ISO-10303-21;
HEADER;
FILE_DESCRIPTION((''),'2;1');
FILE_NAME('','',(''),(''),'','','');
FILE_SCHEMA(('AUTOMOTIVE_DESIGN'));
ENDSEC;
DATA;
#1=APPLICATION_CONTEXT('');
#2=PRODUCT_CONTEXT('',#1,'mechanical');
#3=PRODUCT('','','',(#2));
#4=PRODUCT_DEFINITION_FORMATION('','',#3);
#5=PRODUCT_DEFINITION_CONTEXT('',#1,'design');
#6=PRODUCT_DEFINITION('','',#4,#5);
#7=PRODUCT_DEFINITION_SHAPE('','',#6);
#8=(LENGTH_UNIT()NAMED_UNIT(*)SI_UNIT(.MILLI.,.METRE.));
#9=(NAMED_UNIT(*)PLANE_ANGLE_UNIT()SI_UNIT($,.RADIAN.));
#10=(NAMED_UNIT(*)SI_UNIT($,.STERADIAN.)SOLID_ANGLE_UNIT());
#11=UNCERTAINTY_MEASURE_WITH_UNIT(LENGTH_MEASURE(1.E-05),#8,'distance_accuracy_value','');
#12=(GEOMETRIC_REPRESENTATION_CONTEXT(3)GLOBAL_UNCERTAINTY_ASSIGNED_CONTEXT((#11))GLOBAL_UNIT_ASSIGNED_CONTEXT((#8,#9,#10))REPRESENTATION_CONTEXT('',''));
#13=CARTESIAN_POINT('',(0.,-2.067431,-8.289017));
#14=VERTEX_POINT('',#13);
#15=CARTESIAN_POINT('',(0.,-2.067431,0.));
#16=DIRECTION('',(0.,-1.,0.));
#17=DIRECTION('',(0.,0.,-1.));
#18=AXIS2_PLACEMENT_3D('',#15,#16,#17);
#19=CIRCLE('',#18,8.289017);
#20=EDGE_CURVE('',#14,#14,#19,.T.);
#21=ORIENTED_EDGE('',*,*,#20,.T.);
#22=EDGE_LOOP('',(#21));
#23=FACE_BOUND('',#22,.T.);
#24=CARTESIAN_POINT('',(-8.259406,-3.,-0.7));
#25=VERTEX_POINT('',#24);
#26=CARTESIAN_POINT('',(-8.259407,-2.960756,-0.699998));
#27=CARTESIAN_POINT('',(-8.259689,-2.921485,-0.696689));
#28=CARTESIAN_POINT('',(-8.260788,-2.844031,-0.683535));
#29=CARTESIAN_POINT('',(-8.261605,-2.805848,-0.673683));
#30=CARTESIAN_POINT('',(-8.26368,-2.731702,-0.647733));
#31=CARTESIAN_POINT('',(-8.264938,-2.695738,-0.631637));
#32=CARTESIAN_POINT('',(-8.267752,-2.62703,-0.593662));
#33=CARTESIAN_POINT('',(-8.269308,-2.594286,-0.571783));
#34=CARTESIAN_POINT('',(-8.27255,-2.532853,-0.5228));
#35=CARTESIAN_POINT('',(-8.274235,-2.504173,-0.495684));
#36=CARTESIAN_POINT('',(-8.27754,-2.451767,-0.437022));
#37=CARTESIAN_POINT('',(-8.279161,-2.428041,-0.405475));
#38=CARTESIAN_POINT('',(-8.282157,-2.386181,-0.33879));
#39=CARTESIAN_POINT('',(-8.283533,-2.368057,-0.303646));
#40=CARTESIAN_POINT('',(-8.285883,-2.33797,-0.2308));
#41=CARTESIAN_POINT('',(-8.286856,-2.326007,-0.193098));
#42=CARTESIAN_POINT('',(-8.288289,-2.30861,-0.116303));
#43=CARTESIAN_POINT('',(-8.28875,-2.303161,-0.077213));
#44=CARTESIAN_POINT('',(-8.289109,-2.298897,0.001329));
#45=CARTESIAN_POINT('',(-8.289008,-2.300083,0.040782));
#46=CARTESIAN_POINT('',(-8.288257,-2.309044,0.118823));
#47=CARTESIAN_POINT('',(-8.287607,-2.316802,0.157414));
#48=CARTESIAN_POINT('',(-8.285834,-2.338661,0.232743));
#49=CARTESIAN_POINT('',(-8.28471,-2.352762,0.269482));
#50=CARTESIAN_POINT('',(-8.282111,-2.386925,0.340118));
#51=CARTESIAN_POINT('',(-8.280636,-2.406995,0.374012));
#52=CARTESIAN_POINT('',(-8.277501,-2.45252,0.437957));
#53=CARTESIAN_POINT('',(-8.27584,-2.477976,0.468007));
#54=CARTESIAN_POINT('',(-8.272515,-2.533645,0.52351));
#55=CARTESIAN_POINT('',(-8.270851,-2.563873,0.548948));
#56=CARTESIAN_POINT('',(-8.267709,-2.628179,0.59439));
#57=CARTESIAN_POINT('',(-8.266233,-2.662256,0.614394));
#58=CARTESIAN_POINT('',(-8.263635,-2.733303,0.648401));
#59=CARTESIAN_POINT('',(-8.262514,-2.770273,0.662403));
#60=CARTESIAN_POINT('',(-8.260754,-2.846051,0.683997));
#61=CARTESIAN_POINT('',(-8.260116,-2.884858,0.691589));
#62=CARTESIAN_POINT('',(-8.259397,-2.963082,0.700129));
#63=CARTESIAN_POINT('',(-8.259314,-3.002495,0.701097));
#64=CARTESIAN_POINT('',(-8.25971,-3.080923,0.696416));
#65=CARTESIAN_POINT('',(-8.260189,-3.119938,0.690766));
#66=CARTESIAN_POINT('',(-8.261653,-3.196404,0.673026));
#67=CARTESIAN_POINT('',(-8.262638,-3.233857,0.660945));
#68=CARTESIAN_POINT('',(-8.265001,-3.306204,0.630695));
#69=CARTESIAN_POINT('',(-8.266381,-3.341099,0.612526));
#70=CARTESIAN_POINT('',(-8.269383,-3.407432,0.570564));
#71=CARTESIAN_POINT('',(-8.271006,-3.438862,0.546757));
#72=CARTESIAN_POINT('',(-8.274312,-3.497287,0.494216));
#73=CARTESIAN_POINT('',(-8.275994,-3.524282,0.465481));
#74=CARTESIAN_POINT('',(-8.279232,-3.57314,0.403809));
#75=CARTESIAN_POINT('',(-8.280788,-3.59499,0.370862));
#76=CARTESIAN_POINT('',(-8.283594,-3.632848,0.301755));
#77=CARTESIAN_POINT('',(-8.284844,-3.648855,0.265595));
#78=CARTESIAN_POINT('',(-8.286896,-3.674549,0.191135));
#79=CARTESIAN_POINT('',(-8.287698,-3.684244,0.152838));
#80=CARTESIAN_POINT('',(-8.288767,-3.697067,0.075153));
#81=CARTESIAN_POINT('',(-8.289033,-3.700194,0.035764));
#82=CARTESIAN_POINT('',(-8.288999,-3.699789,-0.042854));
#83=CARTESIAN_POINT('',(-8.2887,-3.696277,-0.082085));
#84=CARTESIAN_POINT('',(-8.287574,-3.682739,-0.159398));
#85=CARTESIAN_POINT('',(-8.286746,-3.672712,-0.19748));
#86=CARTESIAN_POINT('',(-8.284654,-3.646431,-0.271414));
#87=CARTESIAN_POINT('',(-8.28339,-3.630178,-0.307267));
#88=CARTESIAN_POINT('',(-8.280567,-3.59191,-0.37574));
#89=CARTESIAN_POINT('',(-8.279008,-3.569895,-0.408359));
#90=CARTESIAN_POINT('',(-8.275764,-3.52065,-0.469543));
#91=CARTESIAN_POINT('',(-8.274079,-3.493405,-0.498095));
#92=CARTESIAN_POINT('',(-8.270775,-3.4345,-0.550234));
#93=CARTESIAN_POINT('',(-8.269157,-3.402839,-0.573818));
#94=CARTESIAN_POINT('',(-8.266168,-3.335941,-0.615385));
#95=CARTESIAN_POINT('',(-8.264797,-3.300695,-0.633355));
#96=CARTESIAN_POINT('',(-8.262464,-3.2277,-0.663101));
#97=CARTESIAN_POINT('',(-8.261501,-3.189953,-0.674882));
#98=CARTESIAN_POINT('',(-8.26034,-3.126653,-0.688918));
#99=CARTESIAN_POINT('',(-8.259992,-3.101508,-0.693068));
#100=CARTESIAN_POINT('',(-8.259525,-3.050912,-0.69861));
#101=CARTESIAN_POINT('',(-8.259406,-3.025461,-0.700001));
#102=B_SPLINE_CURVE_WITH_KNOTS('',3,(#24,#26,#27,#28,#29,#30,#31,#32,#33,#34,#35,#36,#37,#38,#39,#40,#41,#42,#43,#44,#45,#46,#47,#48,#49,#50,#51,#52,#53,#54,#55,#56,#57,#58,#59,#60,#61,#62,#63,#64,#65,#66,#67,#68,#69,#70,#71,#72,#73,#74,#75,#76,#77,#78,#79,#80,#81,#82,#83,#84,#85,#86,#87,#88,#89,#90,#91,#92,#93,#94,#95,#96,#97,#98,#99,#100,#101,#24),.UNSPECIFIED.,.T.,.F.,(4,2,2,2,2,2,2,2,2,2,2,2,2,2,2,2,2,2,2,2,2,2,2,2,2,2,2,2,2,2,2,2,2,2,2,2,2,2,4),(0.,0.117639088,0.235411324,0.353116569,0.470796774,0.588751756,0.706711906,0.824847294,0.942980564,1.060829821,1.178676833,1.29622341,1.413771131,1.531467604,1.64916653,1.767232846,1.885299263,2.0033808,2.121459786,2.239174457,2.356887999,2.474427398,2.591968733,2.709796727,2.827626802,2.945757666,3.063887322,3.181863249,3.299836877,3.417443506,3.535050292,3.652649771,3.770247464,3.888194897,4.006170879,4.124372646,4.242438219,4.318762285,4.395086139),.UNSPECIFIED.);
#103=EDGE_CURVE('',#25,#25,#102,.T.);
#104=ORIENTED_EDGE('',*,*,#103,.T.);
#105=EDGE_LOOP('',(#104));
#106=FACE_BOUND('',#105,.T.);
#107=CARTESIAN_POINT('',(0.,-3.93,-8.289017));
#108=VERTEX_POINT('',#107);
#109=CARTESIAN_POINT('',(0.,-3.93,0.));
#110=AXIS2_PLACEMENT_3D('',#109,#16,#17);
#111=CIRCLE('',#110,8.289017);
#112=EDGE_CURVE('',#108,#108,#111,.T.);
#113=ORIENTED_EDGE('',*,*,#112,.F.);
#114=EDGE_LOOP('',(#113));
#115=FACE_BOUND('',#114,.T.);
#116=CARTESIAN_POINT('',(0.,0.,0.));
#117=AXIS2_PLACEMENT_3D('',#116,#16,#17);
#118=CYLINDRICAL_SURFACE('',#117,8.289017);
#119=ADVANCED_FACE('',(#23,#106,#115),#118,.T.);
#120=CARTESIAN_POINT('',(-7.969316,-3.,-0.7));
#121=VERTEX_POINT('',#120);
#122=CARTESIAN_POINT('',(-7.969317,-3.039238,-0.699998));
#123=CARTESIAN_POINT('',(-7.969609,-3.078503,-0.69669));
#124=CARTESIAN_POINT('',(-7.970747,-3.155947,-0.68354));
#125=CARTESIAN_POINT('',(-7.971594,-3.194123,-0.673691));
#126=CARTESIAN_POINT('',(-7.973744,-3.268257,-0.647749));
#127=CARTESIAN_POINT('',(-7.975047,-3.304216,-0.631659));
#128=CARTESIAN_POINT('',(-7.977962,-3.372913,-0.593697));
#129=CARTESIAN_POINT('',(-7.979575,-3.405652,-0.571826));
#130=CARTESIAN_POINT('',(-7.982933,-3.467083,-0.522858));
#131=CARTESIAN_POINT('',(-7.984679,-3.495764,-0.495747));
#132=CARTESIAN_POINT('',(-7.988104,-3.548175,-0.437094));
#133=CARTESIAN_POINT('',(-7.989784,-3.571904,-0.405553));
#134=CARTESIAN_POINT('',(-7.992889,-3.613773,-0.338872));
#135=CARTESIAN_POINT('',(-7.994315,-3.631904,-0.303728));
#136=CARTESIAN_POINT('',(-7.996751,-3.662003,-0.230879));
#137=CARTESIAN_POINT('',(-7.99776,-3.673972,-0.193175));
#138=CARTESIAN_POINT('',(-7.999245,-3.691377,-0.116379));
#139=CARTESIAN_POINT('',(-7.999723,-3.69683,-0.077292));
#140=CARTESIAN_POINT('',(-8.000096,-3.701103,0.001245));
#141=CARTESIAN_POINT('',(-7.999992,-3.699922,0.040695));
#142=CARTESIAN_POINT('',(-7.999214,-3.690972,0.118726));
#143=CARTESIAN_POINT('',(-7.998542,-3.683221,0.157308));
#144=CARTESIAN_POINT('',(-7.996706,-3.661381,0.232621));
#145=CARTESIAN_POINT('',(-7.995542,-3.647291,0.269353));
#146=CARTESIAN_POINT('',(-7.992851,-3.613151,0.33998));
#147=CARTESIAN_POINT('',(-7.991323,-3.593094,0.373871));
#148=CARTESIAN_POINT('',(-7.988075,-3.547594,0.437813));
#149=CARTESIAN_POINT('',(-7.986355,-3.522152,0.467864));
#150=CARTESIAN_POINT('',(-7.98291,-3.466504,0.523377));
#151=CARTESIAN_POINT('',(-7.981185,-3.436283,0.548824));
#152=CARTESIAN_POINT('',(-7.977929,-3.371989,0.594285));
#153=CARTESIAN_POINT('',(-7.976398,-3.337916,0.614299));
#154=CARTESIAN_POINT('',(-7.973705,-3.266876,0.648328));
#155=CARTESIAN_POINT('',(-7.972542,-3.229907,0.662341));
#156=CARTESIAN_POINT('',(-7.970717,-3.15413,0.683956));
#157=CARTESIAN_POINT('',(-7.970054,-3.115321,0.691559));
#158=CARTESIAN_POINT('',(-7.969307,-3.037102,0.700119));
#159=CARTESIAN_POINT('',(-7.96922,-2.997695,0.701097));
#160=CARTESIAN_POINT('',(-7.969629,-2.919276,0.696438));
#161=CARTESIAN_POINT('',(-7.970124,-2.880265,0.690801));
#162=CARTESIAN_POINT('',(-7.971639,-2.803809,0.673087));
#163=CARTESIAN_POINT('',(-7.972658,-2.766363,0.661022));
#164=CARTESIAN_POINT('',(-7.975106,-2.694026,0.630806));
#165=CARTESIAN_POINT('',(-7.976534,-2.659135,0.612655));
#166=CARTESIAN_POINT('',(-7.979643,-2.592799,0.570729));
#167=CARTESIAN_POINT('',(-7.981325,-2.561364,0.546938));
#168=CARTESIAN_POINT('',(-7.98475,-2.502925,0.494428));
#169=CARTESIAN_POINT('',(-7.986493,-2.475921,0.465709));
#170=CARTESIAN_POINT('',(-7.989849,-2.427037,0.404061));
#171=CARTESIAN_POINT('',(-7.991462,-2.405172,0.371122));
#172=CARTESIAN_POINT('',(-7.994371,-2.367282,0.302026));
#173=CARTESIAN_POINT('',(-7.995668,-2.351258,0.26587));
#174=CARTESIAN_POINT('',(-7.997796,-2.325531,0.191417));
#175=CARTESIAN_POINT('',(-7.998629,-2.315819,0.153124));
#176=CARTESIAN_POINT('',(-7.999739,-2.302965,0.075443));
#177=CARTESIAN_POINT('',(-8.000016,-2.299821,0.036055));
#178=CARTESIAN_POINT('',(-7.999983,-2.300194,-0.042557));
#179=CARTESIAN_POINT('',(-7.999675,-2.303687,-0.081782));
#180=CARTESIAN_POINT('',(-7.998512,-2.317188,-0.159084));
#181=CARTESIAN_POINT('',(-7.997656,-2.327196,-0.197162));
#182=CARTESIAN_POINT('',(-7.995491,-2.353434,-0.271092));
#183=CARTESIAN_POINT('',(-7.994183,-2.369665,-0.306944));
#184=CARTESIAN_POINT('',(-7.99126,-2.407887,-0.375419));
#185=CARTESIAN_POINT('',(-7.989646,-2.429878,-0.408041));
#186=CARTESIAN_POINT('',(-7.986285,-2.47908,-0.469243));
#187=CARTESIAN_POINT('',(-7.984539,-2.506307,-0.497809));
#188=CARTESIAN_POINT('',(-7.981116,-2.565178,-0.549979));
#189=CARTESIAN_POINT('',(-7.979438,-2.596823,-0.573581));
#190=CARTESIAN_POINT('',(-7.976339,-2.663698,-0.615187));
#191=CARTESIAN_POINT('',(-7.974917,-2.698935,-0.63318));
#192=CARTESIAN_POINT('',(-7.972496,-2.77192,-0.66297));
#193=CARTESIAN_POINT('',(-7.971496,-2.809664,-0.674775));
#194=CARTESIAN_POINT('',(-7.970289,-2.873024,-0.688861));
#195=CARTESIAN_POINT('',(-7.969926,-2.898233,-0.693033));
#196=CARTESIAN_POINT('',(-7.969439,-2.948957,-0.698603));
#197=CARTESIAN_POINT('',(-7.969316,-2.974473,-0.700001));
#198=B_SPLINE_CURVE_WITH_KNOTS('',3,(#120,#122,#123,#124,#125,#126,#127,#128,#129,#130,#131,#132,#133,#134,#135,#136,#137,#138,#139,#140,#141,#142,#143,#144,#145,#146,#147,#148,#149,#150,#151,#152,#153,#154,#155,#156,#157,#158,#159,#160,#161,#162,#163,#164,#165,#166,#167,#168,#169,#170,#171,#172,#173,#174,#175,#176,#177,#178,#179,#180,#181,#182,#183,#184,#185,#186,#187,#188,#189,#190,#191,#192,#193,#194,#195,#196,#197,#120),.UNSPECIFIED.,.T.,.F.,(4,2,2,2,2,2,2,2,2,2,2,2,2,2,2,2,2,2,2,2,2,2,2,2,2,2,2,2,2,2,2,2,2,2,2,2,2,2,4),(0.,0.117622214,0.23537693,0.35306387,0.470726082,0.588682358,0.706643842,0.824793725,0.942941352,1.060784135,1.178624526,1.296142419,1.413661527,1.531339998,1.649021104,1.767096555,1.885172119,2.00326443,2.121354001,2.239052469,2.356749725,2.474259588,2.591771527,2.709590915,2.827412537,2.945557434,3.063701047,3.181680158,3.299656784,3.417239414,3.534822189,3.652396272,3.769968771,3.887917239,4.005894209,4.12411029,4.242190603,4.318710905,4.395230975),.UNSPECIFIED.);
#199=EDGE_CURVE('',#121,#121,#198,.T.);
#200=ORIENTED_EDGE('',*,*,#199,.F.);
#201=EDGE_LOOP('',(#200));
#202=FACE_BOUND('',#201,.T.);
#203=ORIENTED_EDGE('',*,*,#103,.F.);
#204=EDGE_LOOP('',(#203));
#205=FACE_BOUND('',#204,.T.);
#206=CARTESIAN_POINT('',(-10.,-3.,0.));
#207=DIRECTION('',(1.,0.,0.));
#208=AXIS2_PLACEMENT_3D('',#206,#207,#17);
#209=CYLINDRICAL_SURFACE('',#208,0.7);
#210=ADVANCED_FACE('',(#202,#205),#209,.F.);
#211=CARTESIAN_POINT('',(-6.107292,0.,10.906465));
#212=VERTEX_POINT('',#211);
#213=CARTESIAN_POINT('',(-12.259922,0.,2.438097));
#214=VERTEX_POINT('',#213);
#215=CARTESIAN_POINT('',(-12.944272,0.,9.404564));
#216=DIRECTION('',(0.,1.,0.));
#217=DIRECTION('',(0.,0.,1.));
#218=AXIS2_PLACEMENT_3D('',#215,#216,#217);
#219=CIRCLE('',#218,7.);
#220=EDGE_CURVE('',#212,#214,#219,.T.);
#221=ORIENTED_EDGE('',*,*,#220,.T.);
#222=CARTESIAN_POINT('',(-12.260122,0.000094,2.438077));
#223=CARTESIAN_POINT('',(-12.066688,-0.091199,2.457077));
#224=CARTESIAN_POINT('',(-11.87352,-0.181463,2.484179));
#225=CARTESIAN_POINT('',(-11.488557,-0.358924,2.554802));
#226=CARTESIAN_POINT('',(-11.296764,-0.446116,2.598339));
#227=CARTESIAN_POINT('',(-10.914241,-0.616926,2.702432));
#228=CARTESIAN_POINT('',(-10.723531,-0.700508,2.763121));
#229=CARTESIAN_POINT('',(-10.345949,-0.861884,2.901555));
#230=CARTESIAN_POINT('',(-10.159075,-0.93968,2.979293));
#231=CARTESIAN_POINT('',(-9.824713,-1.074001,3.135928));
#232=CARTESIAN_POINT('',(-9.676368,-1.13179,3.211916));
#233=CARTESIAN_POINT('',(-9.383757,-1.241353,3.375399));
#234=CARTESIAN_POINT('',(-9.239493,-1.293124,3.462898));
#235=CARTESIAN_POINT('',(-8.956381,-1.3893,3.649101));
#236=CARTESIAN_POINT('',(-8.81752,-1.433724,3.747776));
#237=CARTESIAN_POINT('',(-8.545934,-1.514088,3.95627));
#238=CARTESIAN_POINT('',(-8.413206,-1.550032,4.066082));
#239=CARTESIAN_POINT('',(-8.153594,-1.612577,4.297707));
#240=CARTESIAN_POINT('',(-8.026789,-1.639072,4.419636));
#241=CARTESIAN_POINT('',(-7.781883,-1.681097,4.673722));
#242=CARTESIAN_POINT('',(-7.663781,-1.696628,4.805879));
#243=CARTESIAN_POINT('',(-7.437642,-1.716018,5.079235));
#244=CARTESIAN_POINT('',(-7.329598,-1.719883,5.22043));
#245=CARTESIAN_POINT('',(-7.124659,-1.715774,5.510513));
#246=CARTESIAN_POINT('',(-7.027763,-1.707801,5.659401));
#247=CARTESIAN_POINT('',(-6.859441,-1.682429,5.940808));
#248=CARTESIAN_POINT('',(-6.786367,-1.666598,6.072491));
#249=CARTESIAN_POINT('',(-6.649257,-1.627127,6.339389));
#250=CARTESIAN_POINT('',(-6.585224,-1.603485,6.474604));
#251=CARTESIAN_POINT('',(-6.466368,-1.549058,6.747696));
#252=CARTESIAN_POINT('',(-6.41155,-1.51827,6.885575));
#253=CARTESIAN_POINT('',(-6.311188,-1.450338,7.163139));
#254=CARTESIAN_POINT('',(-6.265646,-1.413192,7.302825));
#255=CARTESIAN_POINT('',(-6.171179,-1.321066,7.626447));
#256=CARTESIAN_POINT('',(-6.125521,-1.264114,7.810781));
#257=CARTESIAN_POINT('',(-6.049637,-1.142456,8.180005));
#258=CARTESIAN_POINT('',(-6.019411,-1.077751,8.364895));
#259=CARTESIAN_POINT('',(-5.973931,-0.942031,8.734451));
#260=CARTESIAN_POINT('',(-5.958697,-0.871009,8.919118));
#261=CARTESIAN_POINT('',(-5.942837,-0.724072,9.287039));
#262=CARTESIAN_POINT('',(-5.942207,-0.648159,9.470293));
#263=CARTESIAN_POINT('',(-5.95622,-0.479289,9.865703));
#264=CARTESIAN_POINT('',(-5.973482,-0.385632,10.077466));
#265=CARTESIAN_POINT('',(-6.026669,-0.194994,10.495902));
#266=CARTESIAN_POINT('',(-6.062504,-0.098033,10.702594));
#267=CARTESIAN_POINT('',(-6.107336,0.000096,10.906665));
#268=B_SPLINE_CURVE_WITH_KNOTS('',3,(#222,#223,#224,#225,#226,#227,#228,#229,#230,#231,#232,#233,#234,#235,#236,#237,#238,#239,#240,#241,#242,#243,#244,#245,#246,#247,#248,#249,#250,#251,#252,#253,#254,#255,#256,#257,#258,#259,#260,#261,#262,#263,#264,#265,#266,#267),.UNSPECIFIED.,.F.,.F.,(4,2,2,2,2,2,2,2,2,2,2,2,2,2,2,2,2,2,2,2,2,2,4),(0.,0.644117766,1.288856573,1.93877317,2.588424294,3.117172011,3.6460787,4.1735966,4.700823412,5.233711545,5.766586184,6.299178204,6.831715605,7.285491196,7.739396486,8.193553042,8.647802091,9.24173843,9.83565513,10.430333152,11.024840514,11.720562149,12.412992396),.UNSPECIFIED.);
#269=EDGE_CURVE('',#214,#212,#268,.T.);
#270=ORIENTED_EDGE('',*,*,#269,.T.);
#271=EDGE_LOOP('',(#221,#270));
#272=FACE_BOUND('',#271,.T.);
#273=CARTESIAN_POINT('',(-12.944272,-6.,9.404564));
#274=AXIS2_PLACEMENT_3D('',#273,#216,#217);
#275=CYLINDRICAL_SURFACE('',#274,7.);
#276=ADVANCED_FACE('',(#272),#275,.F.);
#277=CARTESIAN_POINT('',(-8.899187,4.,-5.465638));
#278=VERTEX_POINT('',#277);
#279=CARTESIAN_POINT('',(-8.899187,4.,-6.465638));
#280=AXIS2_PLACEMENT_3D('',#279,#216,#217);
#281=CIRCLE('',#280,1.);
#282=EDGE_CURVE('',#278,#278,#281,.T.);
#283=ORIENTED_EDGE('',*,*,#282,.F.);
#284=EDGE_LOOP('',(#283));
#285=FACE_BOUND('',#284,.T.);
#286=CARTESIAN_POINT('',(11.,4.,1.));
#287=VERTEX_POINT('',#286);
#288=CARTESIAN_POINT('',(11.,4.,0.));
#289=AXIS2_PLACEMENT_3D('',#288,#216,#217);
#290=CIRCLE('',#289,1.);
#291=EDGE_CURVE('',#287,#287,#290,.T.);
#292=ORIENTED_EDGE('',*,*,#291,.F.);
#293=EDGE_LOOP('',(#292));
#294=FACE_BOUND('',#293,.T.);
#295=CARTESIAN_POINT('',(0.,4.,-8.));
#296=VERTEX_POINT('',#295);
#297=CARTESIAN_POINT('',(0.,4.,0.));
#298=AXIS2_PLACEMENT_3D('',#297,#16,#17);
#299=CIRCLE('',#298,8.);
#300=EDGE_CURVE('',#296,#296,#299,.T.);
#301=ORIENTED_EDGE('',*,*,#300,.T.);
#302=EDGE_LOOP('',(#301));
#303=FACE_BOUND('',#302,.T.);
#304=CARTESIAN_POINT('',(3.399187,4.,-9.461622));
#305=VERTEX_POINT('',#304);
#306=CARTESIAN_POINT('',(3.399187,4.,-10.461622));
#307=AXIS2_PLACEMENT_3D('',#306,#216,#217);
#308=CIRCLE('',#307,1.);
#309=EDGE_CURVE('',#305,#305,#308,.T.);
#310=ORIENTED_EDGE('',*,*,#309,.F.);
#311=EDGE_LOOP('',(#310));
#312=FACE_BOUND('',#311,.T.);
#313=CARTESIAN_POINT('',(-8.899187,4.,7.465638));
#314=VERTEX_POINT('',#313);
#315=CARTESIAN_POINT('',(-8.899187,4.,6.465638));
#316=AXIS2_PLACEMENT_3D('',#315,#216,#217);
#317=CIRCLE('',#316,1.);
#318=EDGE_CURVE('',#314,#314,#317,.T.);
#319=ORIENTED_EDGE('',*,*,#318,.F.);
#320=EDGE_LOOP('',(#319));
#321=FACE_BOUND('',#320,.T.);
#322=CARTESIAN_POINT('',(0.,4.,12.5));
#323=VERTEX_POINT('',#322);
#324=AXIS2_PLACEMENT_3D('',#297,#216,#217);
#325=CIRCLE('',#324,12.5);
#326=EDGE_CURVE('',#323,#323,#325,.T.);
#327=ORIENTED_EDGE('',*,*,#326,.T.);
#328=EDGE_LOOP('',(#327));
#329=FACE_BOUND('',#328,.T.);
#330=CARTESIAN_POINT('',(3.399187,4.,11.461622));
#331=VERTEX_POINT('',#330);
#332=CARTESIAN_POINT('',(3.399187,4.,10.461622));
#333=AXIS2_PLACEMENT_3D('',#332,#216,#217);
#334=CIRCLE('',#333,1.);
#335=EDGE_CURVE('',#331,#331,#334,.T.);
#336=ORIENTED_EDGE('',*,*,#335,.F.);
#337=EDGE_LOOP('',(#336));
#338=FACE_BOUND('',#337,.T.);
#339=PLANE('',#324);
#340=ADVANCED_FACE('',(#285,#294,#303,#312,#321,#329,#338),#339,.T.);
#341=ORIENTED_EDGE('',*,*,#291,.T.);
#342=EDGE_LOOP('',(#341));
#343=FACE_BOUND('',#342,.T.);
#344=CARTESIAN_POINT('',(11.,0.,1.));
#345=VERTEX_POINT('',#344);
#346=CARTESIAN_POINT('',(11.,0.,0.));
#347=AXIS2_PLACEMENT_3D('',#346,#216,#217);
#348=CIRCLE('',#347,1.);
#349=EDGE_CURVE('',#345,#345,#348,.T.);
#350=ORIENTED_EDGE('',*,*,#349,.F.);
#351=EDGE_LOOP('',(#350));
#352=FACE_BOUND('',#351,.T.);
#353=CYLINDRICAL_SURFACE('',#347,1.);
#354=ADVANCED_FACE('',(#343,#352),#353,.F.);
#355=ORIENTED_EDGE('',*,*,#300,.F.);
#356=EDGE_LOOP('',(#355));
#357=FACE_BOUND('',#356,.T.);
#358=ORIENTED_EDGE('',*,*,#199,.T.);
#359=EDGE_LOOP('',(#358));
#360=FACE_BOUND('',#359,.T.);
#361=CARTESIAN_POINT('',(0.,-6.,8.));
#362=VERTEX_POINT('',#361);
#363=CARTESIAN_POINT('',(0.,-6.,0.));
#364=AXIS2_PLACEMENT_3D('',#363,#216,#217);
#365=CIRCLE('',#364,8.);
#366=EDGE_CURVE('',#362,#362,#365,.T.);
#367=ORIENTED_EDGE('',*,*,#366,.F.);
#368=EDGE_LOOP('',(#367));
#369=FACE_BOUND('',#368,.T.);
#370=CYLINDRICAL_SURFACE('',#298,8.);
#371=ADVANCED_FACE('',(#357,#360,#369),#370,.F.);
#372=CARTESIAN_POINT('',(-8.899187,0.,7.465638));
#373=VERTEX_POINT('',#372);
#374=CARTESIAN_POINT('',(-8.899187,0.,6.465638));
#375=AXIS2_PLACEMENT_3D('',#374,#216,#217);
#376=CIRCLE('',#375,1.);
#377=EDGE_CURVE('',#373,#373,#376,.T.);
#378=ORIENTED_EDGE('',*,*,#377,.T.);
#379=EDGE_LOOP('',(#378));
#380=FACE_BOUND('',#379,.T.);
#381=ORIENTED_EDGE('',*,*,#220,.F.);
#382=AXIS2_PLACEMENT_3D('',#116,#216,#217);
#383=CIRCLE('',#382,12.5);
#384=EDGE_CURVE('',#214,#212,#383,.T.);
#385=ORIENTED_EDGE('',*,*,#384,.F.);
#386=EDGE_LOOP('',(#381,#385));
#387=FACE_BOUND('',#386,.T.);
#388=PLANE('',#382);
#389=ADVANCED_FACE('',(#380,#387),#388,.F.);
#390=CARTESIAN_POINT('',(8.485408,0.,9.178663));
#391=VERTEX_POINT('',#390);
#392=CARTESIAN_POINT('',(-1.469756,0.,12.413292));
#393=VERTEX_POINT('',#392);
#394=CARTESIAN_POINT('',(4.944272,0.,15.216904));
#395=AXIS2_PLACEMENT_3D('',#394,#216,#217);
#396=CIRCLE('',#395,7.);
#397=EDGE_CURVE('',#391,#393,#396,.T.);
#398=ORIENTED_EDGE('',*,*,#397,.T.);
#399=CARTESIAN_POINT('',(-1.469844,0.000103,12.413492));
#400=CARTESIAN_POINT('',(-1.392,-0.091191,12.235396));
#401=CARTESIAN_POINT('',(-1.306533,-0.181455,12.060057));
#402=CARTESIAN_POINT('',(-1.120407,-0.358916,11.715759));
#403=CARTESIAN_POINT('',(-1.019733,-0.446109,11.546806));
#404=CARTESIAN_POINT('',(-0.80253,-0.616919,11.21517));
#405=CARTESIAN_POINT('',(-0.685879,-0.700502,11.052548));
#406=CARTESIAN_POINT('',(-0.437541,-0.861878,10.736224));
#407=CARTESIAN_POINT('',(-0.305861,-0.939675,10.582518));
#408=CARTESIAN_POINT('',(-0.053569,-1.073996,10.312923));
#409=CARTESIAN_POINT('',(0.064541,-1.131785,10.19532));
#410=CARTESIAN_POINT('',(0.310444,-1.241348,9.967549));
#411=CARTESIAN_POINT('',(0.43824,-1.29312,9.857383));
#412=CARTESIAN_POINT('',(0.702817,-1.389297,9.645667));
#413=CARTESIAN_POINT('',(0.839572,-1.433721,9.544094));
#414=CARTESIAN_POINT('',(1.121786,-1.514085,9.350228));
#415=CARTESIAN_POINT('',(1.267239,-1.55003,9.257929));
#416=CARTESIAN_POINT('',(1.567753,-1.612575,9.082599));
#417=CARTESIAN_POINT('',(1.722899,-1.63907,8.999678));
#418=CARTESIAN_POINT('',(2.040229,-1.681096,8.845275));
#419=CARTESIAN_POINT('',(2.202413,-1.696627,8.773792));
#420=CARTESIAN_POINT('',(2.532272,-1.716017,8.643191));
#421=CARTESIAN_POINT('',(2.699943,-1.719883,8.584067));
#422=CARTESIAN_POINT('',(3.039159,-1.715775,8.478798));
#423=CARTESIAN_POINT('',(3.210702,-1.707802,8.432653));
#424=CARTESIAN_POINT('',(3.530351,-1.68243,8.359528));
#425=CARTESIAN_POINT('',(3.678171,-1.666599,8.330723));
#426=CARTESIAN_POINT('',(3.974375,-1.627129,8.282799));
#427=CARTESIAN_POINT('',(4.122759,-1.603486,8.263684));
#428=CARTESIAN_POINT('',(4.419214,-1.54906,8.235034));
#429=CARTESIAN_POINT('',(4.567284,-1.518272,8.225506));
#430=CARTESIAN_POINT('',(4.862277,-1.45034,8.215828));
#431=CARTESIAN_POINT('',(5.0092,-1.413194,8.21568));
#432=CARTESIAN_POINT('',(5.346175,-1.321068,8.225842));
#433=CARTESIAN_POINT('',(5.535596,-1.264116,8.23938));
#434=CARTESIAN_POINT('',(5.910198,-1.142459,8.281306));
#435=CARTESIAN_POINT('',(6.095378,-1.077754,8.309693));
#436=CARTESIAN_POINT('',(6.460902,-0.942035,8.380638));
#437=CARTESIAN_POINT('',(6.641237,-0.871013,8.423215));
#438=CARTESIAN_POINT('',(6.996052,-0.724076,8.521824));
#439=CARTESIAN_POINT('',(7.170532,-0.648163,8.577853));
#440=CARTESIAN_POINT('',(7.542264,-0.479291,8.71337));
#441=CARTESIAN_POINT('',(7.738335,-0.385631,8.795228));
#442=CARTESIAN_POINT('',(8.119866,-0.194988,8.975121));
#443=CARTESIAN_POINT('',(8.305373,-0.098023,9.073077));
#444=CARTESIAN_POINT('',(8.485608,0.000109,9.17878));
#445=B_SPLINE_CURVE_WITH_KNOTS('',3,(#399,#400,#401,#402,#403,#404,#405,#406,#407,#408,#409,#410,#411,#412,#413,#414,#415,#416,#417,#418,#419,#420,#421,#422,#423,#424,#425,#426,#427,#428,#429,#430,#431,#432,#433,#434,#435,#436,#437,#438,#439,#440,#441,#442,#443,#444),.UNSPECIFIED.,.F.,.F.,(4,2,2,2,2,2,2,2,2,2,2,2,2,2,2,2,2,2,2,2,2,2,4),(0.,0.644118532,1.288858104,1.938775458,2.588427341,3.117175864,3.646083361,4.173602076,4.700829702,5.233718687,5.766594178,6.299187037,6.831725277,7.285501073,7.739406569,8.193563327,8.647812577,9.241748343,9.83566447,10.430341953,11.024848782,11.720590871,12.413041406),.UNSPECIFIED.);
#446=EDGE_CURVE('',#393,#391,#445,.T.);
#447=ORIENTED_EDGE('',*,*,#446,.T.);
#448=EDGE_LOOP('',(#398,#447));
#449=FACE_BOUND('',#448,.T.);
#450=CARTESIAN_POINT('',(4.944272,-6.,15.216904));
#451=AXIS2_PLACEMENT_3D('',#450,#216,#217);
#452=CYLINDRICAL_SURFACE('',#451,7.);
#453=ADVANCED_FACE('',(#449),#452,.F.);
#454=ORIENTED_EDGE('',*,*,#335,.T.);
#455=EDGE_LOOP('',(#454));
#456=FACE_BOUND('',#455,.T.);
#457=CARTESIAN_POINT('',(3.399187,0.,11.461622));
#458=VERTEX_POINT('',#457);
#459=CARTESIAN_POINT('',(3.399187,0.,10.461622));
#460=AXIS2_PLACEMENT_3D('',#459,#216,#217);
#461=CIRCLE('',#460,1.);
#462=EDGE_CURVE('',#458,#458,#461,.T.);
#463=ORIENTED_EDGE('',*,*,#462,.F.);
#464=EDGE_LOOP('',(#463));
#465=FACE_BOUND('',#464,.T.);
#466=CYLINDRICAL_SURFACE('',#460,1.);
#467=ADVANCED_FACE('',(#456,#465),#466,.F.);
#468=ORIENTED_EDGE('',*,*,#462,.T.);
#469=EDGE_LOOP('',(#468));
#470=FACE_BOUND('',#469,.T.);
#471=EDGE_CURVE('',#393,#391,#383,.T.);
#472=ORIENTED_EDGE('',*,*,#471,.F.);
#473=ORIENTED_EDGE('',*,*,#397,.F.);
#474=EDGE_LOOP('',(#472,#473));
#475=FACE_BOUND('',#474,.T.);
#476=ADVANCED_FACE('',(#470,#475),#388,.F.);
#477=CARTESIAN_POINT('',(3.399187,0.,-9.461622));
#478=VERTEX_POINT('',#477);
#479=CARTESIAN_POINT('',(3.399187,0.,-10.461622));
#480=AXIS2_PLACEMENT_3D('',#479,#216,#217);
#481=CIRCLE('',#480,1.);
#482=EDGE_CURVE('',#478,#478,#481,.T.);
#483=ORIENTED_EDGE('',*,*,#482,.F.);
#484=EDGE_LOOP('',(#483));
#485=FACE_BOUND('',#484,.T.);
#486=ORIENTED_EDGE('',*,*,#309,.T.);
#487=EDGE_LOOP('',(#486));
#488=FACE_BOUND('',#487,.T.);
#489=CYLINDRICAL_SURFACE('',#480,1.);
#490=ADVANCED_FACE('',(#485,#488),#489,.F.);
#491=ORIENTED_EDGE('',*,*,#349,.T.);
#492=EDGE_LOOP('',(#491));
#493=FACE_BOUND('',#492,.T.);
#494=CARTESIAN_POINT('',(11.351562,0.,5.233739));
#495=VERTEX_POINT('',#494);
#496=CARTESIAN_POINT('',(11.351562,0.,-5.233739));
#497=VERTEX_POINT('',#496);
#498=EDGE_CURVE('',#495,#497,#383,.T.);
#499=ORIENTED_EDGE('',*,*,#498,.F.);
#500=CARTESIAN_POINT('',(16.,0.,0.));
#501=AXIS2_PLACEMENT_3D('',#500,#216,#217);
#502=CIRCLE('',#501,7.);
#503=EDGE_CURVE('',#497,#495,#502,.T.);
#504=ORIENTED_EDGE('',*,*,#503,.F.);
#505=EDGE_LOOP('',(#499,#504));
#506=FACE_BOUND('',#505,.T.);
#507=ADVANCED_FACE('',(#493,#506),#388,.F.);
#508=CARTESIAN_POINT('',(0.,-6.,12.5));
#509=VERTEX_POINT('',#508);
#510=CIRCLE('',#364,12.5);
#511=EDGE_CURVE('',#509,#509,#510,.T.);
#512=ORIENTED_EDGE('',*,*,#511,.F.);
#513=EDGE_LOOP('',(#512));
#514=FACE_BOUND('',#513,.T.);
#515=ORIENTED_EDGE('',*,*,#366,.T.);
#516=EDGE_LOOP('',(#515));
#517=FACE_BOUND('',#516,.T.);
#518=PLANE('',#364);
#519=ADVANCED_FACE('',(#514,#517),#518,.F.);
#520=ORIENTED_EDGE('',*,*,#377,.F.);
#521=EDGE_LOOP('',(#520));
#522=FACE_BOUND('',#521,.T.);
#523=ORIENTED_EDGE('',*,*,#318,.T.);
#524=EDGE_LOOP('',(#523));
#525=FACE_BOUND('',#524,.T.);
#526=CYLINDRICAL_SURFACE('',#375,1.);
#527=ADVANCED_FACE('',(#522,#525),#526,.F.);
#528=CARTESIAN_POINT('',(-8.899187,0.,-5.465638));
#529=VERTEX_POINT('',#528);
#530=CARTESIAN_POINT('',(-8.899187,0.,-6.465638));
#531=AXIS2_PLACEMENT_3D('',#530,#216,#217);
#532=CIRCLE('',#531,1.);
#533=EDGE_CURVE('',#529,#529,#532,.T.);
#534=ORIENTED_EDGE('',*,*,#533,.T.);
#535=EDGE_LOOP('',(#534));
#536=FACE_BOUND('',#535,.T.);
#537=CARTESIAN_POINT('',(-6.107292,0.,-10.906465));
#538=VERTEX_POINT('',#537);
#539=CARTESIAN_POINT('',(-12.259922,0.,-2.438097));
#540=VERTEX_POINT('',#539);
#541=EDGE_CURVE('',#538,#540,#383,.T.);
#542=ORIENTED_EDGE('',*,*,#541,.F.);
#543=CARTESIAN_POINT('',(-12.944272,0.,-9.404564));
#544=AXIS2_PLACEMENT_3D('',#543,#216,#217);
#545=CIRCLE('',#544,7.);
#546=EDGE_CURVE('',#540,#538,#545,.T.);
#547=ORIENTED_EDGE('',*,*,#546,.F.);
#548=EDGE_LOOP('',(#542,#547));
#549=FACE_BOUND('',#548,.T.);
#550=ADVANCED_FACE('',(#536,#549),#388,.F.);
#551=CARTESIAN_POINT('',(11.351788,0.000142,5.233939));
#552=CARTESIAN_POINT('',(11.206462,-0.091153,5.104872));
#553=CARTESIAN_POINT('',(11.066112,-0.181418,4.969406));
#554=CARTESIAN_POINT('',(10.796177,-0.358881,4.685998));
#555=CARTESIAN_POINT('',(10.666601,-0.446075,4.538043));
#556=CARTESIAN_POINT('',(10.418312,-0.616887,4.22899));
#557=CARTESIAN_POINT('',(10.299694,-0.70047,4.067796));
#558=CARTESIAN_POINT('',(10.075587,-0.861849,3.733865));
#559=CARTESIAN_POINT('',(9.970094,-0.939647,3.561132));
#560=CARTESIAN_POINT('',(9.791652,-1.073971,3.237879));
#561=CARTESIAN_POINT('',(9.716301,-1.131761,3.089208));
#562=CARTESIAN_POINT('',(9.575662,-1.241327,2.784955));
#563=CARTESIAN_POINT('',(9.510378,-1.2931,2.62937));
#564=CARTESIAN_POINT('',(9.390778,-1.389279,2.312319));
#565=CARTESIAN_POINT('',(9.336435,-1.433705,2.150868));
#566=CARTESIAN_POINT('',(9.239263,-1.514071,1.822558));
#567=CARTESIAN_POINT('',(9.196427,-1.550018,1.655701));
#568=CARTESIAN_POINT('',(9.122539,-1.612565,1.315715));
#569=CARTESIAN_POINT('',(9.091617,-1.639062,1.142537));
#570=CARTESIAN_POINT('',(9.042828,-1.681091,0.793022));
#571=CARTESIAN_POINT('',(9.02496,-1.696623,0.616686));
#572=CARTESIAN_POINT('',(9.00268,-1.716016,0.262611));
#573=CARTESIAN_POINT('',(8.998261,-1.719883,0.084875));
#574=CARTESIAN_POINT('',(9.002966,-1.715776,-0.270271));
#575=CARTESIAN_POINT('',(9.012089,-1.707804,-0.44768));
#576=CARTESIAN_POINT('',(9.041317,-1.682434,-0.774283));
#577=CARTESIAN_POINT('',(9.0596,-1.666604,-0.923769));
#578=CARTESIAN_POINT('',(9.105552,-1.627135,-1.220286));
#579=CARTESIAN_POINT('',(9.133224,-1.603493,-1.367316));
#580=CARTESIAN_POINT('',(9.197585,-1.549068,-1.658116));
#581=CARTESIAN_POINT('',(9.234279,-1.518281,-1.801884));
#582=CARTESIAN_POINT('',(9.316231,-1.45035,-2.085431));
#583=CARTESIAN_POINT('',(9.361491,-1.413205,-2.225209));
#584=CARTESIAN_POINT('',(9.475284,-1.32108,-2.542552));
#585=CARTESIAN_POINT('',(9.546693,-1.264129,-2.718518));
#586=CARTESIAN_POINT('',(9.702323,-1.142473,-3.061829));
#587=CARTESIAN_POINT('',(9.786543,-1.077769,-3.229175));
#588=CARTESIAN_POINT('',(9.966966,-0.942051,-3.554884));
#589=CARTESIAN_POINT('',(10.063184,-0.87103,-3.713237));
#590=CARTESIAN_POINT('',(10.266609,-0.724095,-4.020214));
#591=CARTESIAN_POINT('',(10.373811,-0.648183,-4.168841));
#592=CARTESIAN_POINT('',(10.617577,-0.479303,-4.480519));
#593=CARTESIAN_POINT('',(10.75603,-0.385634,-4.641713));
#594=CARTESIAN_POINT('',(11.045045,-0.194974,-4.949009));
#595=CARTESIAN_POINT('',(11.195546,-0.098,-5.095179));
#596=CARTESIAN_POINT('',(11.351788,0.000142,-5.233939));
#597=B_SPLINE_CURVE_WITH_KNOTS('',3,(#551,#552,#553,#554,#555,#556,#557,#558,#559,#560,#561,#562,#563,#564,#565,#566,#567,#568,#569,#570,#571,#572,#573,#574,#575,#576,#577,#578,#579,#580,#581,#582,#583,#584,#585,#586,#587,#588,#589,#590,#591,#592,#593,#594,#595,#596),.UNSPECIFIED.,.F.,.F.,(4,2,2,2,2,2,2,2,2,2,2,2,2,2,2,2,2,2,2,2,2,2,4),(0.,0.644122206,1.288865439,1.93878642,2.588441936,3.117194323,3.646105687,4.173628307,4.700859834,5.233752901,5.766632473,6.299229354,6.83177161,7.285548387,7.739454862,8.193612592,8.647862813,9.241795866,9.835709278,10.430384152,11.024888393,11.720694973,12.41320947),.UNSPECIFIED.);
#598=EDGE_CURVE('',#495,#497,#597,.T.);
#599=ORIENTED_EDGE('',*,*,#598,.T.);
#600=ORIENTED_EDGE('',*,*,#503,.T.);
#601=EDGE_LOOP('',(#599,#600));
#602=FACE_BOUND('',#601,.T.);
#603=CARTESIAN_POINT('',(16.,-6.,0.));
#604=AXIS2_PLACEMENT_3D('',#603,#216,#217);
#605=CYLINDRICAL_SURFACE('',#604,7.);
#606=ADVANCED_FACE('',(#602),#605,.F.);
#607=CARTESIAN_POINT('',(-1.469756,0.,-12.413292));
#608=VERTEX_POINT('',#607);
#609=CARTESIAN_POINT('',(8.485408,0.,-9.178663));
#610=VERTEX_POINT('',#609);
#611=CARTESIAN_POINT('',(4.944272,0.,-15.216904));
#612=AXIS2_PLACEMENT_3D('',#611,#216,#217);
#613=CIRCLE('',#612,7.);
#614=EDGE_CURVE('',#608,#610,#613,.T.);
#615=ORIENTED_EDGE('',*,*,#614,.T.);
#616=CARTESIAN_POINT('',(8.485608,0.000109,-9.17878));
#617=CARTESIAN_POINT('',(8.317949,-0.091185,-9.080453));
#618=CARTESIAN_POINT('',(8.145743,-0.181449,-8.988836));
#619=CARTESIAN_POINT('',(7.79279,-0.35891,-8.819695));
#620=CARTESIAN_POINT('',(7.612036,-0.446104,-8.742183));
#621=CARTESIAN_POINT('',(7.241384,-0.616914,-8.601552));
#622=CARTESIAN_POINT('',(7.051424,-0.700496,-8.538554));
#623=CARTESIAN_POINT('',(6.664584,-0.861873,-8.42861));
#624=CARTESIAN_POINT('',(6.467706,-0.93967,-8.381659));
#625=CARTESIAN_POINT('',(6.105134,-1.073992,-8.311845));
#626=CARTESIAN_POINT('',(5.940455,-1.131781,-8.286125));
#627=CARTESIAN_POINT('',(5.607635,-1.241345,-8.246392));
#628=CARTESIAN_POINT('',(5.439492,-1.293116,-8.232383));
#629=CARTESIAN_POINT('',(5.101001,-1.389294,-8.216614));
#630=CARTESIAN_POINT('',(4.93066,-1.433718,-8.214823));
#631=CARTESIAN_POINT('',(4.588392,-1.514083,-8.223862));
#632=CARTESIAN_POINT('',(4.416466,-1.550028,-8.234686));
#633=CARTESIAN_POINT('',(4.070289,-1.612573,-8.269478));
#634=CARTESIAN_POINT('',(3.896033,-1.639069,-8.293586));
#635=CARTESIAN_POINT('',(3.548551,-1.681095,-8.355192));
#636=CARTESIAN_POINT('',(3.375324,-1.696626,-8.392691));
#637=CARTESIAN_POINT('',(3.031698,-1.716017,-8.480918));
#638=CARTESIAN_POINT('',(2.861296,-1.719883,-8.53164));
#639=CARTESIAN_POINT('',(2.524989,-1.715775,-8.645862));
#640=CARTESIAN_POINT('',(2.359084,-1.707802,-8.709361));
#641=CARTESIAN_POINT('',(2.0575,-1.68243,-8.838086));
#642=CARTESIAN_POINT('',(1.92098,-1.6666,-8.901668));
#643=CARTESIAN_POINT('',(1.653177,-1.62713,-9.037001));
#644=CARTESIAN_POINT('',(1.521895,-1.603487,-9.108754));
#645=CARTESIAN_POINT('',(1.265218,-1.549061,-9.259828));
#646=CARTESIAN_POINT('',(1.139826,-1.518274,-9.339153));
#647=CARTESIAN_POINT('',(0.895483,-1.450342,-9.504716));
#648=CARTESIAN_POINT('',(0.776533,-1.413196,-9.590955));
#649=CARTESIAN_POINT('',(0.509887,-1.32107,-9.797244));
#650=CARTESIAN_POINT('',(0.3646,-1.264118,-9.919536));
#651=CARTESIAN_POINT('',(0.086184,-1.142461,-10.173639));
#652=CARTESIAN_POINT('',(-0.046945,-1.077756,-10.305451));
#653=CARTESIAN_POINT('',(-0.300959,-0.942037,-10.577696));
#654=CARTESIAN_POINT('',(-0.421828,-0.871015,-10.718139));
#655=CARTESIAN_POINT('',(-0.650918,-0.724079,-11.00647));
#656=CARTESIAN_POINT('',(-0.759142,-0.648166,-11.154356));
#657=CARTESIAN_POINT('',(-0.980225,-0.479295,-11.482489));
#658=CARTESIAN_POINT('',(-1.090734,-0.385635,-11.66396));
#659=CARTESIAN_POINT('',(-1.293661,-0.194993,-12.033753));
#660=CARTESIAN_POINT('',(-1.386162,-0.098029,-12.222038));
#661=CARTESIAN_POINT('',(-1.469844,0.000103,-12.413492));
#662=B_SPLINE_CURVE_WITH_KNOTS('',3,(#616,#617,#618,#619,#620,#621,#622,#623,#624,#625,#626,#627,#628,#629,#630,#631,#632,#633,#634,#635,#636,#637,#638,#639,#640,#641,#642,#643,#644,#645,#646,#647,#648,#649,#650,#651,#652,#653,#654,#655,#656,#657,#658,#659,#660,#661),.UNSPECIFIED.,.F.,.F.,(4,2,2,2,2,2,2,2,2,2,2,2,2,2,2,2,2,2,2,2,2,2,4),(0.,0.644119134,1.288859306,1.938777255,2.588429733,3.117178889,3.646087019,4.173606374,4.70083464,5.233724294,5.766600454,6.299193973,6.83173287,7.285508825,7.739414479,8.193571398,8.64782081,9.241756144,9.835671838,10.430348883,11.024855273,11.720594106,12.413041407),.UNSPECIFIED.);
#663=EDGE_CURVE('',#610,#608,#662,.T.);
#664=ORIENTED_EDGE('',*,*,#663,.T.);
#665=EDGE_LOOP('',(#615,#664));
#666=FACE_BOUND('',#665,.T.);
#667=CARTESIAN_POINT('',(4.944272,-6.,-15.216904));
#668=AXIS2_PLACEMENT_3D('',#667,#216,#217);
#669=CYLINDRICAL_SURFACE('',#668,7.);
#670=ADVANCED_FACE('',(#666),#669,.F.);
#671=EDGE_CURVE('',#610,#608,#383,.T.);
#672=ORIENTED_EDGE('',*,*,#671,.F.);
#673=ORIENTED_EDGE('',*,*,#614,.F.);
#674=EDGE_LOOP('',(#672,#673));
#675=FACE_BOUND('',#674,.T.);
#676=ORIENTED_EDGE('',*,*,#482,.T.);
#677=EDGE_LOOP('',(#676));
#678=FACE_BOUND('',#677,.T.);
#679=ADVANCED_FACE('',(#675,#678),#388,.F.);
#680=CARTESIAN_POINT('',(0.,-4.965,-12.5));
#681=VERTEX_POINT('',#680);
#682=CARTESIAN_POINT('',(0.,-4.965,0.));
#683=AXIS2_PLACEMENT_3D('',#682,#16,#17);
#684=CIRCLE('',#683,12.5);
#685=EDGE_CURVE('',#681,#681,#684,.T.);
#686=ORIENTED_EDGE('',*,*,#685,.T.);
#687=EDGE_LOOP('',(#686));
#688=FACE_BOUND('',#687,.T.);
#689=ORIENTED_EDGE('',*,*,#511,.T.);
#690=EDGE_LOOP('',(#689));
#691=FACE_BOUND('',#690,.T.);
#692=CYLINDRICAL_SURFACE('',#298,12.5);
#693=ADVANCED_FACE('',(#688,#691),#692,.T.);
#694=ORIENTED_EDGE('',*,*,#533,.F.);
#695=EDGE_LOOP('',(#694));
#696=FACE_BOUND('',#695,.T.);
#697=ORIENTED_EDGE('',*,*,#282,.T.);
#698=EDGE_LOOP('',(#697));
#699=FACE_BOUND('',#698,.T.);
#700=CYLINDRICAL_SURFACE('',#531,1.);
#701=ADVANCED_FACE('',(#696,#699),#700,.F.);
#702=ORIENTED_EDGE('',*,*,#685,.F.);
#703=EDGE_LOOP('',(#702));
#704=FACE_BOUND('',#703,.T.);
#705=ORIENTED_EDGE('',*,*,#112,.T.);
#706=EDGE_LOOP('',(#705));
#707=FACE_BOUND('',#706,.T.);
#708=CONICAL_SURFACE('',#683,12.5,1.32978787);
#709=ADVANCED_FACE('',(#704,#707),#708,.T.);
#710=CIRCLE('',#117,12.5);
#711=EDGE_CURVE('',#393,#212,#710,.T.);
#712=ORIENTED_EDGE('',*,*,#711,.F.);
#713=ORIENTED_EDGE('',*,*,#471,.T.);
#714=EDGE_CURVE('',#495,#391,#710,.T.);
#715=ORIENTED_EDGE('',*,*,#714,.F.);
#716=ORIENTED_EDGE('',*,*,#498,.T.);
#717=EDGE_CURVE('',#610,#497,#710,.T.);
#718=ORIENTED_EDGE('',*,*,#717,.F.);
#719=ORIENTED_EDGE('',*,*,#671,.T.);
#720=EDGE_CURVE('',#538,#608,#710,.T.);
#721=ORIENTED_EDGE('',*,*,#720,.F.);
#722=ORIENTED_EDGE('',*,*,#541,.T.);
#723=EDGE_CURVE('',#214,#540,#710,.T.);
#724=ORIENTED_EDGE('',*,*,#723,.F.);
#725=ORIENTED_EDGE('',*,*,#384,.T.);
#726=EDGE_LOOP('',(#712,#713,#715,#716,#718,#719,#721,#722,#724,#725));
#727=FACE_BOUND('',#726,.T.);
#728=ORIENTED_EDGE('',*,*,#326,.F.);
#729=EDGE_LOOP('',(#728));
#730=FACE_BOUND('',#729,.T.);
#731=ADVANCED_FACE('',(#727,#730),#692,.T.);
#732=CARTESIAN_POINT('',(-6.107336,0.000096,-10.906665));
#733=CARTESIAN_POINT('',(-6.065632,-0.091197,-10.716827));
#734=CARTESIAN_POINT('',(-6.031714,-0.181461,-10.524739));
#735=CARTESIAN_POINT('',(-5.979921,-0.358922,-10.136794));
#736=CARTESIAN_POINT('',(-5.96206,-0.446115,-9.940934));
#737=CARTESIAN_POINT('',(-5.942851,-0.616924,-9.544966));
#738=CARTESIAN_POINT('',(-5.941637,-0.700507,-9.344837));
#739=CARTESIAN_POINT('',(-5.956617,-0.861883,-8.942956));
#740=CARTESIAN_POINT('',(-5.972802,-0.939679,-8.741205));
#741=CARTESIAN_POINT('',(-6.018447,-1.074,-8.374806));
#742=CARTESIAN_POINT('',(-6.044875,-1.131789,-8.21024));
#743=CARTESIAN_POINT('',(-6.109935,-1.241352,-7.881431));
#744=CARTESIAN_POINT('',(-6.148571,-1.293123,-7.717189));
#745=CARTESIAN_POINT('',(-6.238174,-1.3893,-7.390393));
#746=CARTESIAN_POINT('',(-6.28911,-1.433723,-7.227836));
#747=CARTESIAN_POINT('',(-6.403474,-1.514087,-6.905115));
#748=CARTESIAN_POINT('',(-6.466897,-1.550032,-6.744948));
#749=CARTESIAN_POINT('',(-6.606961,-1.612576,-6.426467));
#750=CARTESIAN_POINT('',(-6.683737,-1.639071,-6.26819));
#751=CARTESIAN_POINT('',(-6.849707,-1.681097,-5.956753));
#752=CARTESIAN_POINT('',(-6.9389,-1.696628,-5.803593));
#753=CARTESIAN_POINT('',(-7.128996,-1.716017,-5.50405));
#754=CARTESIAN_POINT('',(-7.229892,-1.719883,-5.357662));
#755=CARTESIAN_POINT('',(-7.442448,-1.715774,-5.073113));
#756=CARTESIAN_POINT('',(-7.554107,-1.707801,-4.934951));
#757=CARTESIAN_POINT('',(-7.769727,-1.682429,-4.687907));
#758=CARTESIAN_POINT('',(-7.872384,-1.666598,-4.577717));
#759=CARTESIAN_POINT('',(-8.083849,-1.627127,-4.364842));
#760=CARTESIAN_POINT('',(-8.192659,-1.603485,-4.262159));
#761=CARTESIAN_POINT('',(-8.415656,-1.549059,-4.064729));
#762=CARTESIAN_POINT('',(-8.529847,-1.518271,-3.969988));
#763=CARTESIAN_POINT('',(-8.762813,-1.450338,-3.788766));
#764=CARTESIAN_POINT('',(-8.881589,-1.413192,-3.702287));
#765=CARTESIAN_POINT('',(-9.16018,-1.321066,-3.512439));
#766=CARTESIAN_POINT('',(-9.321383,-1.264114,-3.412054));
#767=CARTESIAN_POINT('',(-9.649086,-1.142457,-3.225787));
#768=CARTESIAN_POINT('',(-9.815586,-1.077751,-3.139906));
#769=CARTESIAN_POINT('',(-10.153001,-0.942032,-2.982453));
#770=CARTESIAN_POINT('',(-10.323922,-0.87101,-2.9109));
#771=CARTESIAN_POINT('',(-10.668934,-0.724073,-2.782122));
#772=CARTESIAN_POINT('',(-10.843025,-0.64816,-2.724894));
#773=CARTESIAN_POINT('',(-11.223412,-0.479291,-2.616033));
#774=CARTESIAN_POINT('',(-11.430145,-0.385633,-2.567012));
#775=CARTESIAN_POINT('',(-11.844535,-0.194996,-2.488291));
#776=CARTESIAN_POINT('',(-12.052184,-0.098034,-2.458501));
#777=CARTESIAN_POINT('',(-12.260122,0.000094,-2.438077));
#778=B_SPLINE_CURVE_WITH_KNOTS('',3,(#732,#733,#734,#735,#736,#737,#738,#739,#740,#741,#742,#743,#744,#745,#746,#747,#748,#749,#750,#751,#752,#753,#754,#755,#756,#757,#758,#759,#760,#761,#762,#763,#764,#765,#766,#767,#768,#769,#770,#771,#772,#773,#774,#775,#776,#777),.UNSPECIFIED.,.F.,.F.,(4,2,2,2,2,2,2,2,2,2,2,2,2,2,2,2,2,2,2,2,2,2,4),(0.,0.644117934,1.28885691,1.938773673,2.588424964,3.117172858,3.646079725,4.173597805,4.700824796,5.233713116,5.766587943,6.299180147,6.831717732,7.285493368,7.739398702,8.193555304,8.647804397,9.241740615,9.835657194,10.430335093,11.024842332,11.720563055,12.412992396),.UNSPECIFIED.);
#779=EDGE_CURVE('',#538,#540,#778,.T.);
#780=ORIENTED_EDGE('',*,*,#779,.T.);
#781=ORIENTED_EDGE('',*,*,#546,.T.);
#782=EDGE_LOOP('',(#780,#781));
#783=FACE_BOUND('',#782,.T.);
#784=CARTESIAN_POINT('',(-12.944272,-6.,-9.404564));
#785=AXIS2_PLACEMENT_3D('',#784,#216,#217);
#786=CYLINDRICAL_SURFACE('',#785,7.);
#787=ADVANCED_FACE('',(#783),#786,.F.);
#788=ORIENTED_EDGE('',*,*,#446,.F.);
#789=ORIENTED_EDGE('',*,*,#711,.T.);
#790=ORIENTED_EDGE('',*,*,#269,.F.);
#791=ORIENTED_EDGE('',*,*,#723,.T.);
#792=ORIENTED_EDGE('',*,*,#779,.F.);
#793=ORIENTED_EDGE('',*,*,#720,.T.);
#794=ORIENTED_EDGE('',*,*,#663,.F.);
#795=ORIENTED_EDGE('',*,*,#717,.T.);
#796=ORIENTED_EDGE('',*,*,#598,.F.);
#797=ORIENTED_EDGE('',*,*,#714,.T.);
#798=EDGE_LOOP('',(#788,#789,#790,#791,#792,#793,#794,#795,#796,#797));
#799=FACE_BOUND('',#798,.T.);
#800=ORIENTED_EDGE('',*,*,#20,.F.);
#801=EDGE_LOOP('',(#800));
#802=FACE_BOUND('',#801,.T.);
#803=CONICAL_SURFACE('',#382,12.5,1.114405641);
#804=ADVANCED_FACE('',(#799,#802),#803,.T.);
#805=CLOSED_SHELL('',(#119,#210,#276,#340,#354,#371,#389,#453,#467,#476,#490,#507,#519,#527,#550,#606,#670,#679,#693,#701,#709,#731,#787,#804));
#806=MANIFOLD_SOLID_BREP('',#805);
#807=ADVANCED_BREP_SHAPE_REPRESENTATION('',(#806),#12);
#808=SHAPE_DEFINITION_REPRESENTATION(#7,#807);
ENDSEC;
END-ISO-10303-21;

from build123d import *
from build123d.topology import SkipClean

# Parameters (mm, degrees)
SKETCH_1_R          = 12.5
EXTRUDE_1_DEPTH     = 4
SKETCH_2_R          = 1
EXTRUDE_2_DEPTH     = 7.5
SKETCH_5_R          = 6
CUT_EXTRUDE_1_DEPTH = 10
CUT_EXTRUDE_START   = -7.5
SKETCH_7_R          = 1
CUT_EXTRUDE_2_DEPTH = 7.5
SKETCH_8_R          = 12.5
SKETCH_8_R_2        = 6
CUT_EXTRUDE_3_DEPTH = 10
SKETCH_9_R          = 1
EXTRUDE_3_DEPTH     = 10
CUT_EXTRUDE_START_2 = -14
SKETCH_10_R         = 1
CUT_EXTRUDE_4_DEPTH = 14
SKETCH_11_R         = 8
CUT_EXTRUDE_5_DEPTH = 10
EXTRUDE_START       = -10
SKETCH_12_R         = 8
EXTRUDE_4_DEPTH     = 10
SKETCH_14_R         = 8
CUT_EXTRUDE_6_DEPTH = 10
SKETCH_15_W         = 0.086708075
SKETCH_15_H         = 4
SKETCH_16_R         = 0.7
CUT_EXTRUDE_7_DEPTH = 10
SKETCH_18_R         = 12.5
EXTRUDE_5_DEPTH     = 2.07
CUT_EXTRUDE_START_3 = -2.07
SKETCH_20_R         = 8
CUT_EXTRUDE_8_DEPTH = 2.07


with BuildPart() as part:
    # 草图1 → 凸台-拉伸1 (new body)
    with BuildSketch(Plane(origin=(0, 0, 0), x_dir=(1, 0, 0), z_dir=(0, 1, 0))):
        with Locations(Location((0, 0, 0), (0, 0, 270))):
            Circle(SKETCH_1_R)
    extrude(amount=EXTRUDE_1_DEPTH)

    # 草图2 → 凸台-拉伸2 (add)
    with BuildSketch(Plane(origin=(0, 4, 0), x_dir=(1, 0, 0), z_dir=(0, 1, 0))):
        with Locations(Location((10, 0, 0), (0, 0, 270))):
            Circle(SKETCH_2_R)
        with Locations(Location((3.399186938, -10.461621679, 0), (0, 0, 270))):
            Circle(SKETCH_2_R)
        with Locations(Location((-8.590169944, -7.416694292, 0), (0, 0, 270))):
            Circle(SKETCH_2_R)
        with Locations(Location((-9.399186938, 4.926796007, 0), (0, 0, 270))):
            Circle(SKETCH_2_R)
        with Locations(Location((2.090169944, 9.510565163, 0), (0, 0, 270))):
            Circle(SKETCH_2_R)
    extrude(amount=EXTRUDE_2_DEPTH)

    # 草图5 → 切除-拉伸1 (cut)
    with BuildSketch(Plane(origin=(0, 4, 0), x_dir=(1, 0, 0), z_dir=(0, 1, 0))):
        with Locations(Location((0, 0, 0), (0, 0, 270))):
            Circle(SKETCH_5_R)
    extrude(amount=-CUT_EXTRUDE_1_DEPTH, mode=Mode.SUBTRACT)

    # 草图7 → 切除-拉伸2 (cut)
    with BuildSketch(Plane(origin=(0, 11.5, 0), x_dir=(1, 0, 0), z_dir=(0, 1, 0)).offset(CUT_EXTRUDE_START)):
        with Locations((-9.399186938, 4.926796007)):
            Circle(SKETCH_7_R)
    extrude(amount=CUT_EXTRUDE_2_DEPTH, mode=Mode.SUBTRACT)

    # 草图8 → 切除-拉伸3 (cut)
    with BuildSketch(Plane(origin=(0, 4, 0), x_dir=(1, 0, 0), z_dir=(0, 1, 0))):
        with Locations(Location((0, 0, 0), (0, 0, 270))):
            Circle(SKETCH_8_R)
        with Locations(Location((0, 0, 0), (0, 0, 270))):
            Circle(SKETCH_8_R_2, mode=Mode.SUBTRACT)
    extrude(amount=CUT_EXTRUDE_3_DEPTH, mode=Mode.SUBTRACT)

    # 草图9 → 凸台-拉伸3 (add)
    with BuildSketch(Plane(origin=(0, 4, 0), x_dir=(1, 0, 0), z_dir=(0, 1, 0))):
        with Locations(Location((11, 0, 0), (0, 0, 270))):
            Circle(SKETCH_9_R)
        with Locations(Location((3.399186938, -10.461621679, 0), (0, 0, 270))):
            Circle(SKETCH_9_R)
        with Locations(Location((-8.899186938, -6.465637775, 0), (0, 0, 270))):
            Circle(SKETCH_9_R)
        with Locations(Location((-8.899186938, 6.465637775, 0), (0, 0, 270))):
            Circle(SKETCH_9_R)
        with Locations(Location((3.399186938, 10.461621679, 0), (0, 0, 270))):
            Circle(SKETCH_9_R)
    extrude(amount=EXTRUDE_3_DEPTH)

    # 草图10 → 切除-拉伸4 (cut)
    with BuildSketch(Plane(origin=(0, 14, 0), x_dir=(1, 0, 0), z_dir=(0, 1, 0)).offset(CUT_EXTRUDE_START_2)):
        with Locations(Location((-8.899186938, -6.465637775, 0), (0, 0, 270))):
            Circle(SKETCH_10_R)
        with Locations(Location((3.399186938, -10.461621679, 0), (0, 0, 270))):
            Circle(SKETCH_10_R)
        with Locations(Location((11, 0, 0), (0, 0, 270))):
            Circle(SKETCH_10_R)
        with Locations(Location((3.399186938, 10.461621679, 0), (0, 0, 270))):
            Circle(SKETCH_10_R)
        with Locations(Location((-8.899186938, 6.465637775, 0), (0, 0, 270))):
            Circle(SKETCH_10_R)
    extrude(amount=CUT_EXTRUDE_4_DEPTH, mode=Mode.SUBTRACT)

    # 草图11 → 切除-拉伸5 (cut)
    with BuildSketch(Plane(origin=(0, 4, 0), x_dir=(1, 0, 0), z_dir=(0, 1, 0))):
        with Locations(Location((0, 0, 0), (0, 0, 270))):
            Circle(SKETCH_11_R)
    extrude(amount=-CUT_EXTRUDE_5_DEPTH, mode=Mode.SUBTRACT)

    # 草图12 → 凸台-拉伸4 (add)
    # profile 1 of 2: a face of its own
    with BuildSketch(Plane(origin=(0, 4, 0), x_dir=(1, 0, 0), z_dir=(0, 1, 0)).offset(EXTRUDE_START)):
        with BuildLine():
            ThreePointArc((8.48540775, 9.178663046), (2.781152949, 8.559508647), (-1.469756299, 12.413291925))
            ThreePointArc((-1.469756299, 12.413291925), (-3.86271243, 11.888206454), (-6.107292102, 10.906465201))
            ThreePointArc((-6.107292102, 10.906465201), (-7.281152949, 5.290067271), (-12.259921848, 2.438096855))
            ThreePointArc((-12.259921848, 2.438096855), (-12.5, 0), (-12.259921848, -2.438096855))
            ThreePointArc((-12.259921848, -2.438096855), (-7.281152949, -5.290067271), (-6.107292102, -10.906465201))
            ThreePointArc((-6.107292102, -10.906465201), (-3.86271243, -11.888206454), (-1.469756299, -12.413291925))
            ThreePointArc((-1.469756299, -12.413291925), (2.781152949, -8.559508647), (8.48540775, -9.178663046))
            ThreePointArc((8.48540775, -9.178663046), (10.11271243, -7.347315654), (11.3515625, -5.233739467))
            ThreePointArc((11.3515625, -5.233739467), (9, 0), (11.3515625, 5.233739467))
            ThreePointArc((11.3515625, 5.233739467), (10.11271243, 7.347315654), (8.48540775, 9.178663046))
        make_face()
        Circle(SKETCH_12_R, mode=Mode.SUBTRACT)
    # profile 2 of 2: a face of its own
    with BuildSketch(Plane(origin=(0, 4, 0), x_dir=(1, 0, 0), z_dir=(0, 1, 0)).offset(EXTRUDE_START)):
        Circle(SKETCH_12_R)
    extrude(amount=EXTRUDE_4_DEPTH)

    # 草图14 → 切除-拉伸6 (cut)
    with SkipClean():  # the faces are left unmerged after this step: merging them gives an invalid solid
        with BuildSketch(Plane.XZ.offset(6)):
            with Locations(Location((0, 0, 0), (0, 0, 270))):
                Circle(SKETCH_14_R)
        extrude(amount=-CUT_EXTRUDE_6_DEPTH, mode=Mode.SUBTRACT)
    add(part.part.scale(1), mode=Mode.REPLACE)  # the faces are merged on a copy

    # 草图15 → 切除-旋转2 (revolve, cut)
    with BuildSketch(Plane(origin=(0, 0, 0), x_dir=(0, 0, -1), z_dir=(1, 0, 0)), mode=Mode.PRIVATE) as cut_revolve_2_sk:
        with Locations((12.456645963, -3)):
            Rectangle(SKETCH_15_W, SKETCH_15_H)
        Polygon((12.413291925, -1), (12.413291925, -5), (9.178663046, -3.93256933), (9.178663046, -2.06743067), align=None)
    revolve(cut_revolve_2_sk.sketch.rotate(Axis((0, 0, 0), (0, -1, 0)), 353.247512934), axis=Axis((0, 0, 0), (0, -1, 0)), mode=Mode.SUBTRACT)

    # 草图16 → 切除-拉伸7 (cut)
    with BuildSketch(Plane(origin=(0, 0, 0), x_dir=(0, 0, -1), z_dir=(1, 0, 0))):
        with Locations((0, -3)):
            Circle(SKETCH_16_R)
    extrude(amount=-CUT_EXTRUDE_7_DEPTH, mode=Mode.SUBTRACT)

    # 草图17 → 切除-旋转4 (revolve, cut)
    with BuildSketch(Plane(origin=(0, 0, 0), x_dir=(0, 0, -1), z_dir=(1, 0, 0)), mode=Mode.PRIVATE) as cut_revolve_4_sk:
        Polygon((12.5, -1), (9.265914401, -2.06743067), (8.289016568, -2.06743067), (12.5, 0), align=None)
    revolve(cut_revolve_4_sk.sketch.rotate(Axis((0, 0, 0), (0, 1, 0)), 6.752487066), axis=Axis((0, 0, 0), (0, 1, 0)), mode=Mode.SUBTRACT)

    # 草图18 → 凸台-拉伸5 (add)
    with SkipClean():  # the faces are left unmerged after this step: merging them gives an invalid solid
        with BuildSketch(Plane.XZ.offset(6)):
            with Locations(Location((0, 0, 0), (0, 0, 263.247512934))):
                Circle(SKETCH_18_R)
        extrude(amount=-EXTRUDE_5_DEPTH)

    # 草图19 → 切除-旋转5 (revolve, cut)
    with SkipClean():  # the faces are left unmerged after this step: merging them gives an invalid solid
        with BuildSketch(Plane(origin=(0, 0, 0), x_dir=(0, 0, -1), z_dir=(1, 0, 0))):
            Polygon((12.5, -2.06743067), (12.5, -4.965), (8.289016568, -3.93), (8.289016568, -2.06743067), align=None)
        revolve(axis=Axis((0, 0, 0), (0, 1, 0)), mode=Mode.SUBTRACT)

    # 草图20 → 切除-拉伸8 (cut)
    with SkipClean():  # the faces are left unmerged after this step: merging them gives an invalid solid
        with BuildSketch(Plane(origin=(0, -3.93, 0), x_dir=(1, 0, 0), z_dir=(0, 1, 0)).offset(CUT_EXTRUDE_START_3)):
            with Locations(Location((0, 0, 0), (0, 0, 90))):
                Circle(SKETCH_20_R)
        extrude(amount=CUT_EXTRUDE_8_DEPTH, mode=Mode.SUBTRACT)


solid = part.part
